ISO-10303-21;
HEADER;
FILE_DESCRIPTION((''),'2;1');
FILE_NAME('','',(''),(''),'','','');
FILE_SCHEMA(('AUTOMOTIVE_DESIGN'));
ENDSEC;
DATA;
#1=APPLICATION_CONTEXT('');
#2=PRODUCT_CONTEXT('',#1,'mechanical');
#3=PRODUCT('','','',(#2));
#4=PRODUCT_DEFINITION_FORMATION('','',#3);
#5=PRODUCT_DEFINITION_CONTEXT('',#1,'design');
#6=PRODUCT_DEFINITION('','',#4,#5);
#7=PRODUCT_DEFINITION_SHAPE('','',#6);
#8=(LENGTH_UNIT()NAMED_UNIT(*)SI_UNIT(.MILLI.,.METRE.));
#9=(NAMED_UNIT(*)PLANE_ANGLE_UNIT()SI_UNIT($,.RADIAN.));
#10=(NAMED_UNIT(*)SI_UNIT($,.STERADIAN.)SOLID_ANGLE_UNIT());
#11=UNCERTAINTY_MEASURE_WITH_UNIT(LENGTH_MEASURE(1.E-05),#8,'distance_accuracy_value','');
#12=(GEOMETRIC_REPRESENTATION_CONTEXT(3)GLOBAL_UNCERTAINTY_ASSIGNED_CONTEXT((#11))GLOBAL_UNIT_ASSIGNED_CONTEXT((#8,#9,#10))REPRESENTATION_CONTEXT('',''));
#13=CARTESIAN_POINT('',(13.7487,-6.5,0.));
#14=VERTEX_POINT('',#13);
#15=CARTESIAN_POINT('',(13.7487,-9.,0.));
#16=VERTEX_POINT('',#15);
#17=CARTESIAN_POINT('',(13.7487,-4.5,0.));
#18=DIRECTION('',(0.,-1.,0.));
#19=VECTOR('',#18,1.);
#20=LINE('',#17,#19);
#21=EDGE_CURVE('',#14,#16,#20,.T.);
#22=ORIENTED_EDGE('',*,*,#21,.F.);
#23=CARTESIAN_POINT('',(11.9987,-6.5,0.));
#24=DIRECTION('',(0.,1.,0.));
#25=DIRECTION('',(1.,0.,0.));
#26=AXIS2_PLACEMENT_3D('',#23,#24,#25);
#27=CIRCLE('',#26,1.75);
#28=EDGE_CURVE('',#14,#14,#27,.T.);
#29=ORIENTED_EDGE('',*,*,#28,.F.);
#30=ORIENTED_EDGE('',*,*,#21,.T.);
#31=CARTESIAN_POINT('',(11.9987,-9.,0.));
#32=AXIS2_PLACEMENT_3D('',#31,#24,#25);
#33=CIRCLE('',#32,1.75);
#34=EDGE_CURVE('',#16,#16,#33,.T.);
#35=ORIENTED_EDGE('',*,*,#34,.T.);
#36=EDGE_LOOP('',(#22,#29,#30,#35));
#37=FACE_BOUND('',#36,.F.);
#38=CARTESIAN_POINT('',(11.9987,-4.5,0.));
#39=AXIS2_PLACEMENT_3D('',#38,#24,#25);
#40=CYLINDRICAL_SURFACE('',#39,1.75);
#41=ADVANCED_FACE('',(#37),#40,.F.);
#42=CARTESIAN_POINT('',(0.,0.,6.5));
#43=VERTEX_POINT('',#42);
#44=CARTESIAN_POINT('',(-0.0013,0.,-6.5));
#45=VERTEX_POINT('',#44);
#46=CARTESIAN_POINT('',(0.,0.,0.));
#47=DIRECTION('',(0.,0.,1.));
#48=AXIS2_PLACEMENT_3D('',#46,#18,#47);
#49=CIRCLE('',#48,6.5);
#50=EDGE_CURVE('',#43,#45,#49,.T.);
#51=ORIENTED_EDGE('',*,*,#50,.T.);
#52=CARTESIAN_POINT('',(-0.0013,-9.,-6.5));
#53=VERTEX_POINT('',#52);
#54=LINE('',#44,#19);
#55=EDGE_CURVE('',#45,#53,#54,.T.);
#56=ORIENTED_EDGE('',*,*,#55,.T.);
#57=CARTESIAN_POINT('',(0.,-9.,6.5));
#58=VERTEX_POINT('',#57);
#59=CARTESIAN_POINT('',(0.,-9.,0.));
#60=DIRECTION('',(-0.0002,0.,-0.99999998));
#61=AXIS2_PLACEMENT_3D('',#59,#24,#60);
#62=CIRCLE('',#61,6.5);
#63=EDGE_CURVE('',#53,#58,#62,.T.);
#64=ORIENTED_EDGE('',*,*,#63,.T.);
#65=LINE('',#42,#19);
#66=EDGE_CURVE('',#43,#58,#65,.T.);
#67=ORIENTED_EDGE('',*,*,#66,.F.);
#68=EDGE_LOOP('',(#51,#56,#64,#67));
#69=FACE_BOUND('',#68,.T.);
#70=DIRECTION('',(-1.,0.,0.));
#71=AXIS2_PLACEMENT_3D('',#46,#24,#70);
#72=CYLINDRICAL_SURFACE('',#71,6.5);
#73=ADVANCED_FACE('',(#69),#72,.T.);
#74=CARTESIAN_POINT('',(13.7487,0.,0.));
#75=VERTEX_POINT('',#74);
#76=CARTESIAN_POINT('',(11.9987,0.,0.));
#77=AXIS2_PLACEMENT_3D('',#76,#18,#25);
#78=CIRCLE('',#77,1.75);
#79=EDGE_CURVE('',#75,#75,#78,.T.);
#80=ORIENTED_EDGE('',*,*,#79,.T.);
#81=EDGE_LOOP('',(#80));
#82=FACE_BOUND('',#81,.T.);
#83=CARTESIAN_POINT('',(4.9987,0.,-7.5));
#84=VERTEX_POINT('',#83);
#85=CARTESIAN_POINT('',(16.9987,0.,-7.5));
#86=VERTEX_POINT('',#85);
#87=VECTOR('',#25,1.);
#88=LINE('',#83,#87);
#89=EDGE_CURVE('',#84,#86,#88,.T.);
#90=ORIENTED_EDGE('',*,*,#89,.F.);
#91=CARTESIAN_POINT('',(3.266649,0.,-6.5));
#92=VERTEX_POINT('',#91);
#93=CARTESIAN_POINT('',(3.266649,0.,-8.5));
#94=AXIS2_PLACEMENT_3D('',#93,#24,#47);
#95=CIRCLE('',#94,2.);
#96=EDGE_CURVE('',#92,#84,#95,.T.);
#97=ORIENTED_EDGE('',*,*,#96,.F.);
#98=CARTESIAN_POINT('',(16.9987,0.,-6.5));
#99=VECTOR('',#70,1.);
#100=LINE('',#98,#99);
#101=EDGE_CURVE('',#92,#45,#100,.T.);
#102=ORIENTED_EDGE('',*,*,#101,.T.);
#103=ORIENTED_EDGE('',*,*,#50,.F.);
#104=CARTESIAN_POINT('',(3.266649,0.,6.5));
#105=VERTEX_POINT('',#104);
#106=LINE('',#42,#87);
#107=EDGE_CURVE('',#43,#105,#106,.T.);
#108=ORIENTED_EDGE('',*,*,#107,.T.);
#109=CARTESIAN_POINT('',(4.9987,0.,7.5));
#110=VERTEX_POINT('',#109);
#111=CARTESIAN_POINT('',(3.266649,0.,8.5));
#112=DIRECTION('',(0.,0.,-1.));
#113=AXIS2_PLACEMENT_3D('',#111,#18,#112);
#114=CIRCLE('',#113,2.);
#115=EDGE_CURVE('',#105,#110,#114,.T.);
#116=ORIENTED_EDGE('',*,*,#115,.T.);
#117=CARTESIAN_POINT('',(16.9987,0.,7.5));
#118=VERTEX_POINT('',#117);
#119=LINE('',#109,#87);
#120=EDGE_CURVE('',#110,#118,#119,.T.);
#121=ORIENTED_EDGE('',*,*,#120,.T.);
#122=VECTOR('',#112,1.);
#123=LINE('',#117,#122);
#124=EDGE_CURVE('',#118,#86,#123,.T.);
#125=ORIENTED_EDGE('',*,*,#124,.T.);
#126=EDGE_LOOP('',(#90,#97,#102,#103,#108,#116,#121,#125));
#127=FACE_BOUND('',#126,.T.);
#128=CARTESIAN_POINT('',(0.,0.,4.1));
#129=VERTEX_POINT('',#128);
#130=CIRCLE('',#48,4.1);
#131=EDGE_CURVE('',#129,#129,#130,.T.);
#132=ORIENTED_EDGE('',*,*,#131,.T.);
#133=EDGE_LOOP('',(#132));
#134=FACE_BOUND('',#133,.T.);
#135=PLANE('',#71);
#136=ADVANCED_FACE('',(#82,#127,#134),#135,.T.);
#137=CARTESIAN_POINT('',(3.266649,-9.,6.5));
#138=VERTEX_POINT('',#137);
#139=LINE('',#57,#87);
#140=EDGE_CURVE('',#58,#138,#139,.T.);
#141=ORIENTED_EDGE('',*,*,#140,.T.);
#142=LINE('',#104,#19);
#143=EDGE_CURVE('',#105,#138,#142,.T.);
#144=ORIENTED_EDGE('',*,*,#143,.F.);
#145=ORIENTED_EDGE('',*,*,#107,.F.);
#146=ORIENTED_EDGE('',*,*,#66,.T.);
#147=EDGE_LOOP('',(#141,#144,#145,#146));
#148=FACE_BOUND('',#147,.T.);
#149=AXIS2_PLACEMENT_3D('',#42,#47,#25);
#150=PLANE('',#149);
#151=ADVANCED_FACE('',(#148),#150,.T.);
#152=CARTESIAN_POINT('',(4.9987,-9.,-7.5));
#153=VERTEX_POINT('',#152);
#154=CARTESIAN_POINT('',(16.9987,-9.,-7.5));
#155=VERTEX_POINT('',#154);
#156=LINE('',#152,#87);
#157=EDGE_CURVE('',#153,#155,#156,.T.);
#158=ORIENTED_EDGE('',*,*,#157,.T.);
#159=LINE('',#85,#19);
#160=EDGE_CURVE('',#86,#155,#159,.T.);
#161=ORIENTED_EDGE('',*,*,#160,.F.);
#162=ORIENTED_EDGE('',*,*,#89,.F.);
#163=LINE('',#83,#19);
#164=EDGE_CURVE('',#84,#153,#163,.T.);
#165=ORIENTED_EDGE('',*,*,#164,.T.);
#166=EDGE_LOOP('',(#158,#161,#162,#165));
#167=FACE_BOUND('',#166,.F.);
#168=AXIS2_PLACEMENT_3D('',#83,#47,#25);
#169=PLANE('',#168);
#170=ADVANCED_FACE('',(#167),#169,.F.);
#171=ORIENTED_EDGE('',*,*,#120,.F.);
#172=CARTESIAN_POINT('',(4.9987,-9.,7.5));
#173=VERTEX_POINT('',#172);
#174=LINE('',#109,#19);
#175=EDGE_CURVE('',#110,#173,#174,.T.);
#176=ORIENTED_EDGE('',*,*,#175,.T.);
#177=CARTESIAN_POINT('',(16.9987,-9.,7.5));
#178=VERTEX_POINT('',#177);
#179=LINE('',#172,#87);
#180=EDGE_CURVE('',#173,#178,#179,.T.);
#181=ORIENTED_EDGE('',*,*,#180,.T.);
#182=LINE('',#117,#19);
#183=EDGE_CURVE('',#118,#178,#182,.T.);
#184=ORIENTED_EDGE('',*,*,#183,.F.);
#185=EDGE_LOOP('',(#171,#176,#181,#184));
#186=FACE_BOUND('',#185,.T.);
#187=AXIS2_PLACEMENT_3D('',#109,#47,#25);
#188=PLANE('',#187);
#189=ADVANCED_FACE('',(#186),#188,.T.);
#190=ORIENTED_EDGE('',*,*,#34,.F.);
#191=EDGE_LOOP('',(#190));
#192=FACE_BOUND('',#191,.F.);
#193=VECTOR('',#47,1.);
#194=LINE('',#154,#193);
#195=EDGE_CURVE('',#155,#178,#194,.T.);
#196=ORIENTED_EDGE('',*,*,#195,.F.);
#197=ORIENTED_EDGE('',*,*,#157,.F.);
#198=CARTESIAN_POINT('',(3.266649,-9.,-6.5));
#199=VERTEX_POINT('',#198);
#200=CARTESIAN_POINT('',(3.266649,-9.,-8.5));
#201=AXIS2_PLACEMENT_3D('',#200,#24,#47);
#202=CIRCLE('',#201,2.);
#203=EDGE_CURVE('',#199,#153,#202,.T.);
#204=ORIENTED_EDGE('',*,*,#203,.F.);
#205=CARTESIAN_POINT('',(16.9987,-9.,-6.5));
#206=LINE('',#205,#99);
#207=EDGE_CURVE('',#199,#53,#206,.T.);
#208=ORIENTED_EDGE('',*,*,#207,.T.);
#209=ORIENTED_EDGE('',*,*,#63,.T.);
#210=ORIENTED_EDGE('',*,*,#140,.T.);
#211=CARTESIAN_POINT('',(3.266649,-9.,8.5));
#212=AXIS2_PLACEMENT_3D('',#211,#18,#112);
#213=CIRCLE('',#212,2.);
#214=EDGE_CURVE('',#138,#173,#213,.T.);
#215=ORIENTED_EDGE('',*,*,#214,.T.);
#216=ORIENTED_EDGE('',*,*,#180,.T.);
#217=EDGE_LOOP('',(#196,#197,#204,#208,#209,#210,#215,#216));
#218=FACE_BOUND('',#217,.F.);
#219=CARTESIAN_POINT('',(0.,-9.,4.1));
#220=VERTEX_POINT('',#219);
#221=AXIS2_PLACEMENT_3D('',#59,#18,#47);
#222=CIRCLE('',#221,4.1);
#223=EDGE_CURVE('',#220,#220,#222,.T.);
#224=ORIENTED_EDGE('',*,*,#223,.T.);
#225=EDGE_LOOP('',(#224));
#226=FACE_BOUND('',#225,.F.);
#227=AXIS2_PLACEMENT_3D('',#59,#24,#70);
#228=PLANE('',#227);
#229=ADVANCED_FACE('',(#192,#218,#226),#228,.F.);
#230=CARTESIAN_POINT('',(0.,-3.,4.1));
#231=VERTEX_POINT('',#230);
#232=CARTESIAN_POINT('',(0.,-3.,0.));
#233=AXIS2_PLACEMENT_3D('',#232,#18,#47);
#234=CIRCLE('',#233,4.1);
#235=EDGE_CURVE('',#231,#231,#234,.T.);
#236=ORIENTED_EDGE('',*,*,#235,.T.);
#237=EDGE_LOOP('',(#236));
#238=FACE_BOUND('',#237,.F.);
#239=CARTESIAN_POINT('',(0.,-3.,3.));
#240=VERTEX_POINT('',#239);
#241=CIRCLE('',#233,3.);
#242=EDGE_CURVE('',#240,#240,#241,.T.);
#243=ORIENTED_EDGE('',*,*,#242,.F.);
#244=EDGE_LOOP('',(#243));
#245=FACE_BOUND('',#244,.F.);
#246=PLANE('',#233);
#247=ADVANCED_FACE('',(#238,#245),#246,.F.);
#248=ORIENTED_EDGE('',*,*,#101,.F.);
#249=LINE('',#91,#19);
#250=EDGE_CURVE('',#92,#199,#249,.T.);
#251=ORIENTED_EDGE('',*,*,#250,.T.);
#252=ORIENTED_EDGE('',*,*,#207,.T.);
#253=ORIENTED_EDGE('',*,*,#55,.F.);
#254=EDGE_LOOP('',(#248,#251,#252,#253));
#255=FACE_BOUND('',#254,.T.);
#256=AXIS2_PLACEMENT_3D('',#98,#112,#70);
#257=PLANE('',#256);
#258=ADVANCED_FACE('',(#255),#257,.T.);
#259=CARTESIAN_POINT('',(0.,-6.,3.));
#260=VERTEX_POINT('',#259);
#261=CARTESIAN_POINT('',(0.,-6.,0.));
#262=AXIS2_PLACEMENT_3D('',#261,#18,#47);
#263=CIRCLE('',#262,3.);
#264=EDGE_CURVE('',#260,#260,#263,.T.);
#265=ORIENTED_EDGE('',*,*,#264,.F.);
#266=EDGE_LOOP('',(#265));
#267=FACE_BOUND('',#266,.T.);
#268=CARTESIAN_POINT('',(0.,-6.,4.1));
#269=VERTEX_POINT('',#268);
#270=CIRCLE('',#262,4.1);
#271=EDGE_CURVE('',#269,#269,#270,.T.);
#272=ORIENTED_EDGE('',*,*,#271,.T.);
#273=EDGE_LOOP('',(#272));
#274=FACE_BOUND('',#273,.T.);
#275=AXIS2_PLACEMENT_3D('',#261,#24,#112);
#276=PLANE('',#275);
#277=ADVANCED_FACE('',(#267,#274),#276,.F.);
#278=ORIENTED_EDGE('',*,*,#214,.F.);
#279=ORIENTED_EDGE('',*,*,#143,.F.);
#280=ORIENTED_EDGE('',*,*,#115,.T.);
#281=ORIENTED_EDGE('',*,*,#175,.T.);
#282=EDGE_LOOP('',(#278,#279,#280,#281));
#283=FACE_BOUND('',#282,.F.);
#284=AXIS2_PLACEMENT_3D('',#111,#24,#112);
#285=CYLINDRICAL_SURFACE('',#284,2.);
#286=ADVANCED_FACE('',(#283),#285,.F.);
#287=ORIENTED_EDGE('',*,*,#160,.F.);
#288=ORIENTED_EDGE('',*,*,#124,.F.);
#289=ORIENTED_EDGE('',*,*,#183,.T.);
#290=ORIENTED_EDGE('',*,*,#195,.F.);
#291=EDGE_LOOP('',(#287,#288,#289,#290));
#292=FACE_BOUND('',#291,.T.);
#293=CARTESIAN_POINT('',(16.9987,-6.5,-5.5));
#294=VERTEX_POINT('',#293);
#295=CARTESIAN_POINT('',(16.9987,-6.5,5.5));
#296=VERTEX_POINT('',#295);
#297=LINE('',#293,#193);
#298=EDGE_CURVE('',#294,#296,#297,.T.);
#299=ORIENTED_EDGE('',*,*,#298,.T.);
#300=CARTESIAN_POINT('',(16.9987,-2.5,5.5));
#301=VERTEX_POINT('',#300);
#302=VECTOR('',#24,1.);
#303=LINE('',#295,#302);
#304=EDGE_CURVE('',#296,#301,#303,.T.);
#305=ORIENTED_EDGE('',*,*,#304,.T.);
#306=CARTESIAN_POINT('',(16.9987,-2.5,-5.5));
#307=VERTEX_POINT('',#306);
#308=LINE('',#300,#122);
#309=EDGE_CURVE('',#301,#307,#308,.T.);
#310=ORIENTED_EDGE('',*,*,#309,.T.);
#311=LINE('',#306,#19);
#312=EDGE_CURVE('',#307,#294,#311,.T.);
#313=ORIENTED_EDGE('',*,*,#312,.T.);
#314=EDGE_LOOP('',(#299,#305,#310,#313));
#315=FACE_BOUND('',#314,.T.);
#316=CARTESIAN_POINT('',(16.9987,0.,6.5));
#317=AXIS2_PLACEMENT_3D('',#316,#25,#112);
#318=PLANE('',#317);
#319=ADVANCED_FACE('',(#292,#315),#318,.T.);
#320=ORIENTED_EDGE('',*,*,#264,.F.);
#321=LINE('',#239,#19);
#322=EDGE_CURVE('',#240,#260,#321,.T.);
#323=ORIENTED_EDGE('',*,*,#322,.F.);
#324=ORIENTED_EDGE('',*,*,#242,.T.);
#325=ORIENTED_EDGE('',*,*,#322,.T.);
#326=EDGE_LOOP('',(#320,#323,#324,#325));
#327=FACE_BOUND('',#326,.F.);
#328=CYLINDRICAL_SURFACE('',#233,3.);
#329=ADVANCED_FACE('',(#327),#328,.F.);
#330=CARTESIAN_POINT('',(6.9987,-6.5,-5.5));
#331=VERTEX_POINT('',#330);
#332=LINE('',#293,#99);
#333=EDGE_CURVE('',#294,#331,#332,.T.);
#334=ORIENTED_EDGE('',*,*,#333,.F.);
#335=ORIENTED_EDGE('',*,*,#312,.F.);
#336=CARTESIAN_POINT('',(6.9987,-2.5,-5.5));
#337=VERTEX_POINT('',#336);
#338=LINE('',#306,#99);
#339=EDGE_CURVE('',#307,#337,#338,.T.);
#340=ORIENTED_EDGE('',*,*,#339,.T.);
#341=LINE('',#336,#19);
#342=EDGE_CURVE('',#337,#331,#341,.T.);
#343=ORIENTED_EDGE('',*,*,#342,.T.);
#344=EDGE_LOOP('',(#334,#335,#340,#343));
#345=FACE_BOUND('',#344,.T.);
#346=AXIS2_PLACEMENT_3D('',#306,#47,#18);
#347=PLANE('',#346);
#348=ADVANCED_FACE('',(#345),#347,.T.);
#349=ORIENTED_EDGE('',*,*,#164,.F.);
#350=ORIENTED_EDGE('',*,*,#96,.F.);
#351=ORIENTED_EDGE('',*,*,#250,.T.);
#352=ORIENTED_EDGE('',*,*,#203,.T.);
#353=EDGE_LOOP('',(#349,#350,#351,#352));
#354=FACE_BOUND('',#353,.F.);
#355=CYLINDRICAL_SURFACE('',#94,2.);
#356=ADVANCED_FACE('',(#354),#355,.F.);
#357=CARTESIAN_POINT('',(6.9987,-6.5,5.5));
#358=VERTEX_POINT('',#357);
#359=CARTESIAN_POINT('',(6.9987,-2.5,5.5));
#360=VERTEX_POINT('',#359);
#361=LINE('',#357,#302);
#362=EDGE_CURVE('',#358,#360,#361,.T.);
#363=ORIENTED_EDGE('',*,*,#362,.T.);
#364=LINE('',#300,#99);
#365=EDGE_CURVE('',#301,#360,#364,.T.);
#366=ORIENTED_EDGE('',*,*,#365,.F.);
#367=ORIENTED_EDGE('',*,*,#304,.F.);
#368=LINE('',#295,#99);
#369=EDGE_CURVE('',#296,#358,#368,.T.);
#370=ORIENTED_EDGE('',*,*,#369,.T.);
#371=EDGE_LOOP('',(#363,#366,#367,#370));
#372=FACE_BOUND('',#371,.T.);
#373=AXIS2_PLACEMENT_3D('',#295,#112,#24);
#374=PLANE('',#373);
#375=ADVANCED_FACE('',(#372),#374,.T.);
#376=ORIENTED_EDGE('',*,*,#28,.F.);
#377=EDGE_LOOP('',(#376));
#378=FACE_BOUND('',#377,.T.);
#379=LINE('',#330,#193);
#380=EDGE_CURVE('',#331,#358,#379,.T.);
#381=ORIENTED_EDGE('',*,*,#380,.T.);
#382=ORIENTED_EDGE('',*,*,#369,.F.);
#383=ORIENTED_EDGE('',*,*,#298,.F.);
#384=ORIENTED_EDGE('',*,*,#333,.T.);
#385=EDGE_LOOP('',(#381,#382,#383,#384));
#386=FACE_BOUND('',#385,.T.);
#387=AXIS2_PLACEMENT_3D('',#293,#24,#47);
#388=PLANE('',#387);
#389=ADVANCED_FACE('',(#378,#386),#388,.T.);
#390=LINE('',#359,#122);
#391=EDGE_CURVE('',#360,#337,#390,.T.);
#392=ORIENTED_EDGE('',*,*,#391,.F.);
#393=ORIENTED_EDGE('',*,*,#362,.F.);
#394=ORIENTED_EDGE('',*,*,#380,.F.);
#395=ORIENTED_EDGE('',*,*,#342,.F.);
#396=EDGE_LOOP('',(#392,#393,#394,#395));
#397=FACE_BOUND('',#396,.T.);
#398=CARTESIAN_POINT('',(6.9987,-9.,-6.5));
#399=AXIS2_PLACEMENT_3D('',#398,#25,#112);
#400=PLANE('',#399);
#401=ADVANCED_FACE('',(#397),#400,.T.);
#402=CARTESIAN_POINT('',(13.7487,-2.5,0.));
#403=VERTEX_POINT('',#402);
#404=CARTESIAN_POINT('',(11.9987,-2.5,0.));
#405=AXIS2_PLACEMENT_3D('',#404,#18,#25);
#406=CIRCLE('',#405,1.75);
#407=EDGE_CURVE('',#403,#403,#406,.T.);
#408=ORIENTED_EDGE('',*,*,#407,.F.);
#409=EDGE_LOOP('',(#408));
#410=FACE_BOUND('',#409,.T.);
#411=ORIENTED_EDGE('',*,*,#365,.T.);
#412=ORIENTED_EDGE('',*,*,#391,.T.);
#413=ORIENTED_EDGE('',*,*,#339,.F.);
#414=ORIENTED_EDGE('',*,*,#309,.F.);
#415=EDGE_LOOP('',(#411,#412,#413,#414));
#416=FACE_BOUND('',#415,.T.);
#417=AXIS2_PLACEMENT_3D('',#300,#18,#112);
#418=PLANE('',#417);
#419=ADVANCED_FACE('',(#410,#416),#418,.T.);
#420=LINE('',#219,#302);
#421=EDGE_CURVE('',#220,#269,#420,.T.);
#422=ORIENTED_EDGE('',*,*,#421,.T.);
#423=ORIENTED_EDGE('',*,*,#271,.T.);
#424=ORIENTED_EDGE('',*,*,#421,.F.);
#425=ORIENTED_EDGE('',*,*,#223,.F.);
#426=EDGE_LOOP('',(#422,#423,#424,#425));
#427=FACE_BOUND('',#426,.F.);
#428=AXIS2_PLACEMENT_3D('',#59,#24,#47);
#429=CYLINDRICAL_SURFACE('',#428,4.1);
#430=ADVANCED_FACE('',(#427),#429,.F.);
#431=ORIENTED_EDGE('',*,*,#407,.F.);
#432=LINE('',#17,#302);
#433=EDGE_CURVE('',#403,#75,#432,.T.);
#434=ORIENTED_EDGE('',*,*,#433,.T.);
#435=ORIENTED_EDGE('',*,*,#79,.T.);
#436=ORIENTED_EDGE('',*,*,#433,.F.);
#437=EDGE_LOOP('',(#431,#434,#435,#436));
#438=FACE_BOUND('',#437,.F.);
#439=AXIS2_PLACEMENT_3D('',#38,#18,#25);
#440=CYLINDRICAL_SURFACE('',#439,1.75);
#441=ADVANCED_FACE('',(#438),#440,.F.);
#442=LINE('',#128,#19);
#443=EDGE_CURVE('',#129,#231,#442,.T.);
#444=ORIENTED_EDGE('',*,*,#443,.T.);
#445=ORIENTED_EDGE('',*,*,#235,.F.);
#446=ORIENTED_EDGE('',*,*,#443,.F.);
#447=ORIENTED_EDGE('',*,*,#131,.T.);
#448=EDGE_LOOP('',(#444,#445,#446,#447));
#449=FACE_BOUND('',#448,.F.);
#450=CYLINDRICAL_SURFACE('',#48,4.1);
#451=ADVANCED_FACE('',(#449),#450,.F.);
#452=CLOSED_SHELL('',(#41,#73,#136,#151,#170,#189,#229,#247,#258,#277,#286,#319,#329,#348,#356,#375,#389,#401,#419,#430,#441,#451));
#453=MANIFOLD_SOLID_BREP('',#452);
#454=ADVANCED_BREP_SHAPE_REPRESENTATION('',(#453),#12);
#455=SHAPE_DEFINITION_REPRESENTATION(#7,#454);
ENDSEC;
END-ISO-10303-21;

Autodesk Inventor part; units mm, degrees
ref_plane "YZ Plane" through (0, 0, 0) normal (1, 0, 0) x (0, 1, 0)
ref_plane "XZ Plane" through (0, 0, 0) normal (0, 1, 0) x (-1, 0, 0)
ref_plane "XY Plane" through (0, 0, 0) normal (0, 0, 1) x (1, 0, 0)
sketch "Sketch1" plane through (0, 0, 0) normal (0, 1, 0) x (-1, 0, 0)
  circle A0 centre (0, 0) radius 2
  circle A1 centre (0, 0) radius 4 construction
  circle A2 centre (0, 0) radius 6.5
  dimension "d0" = 4
  dimension "d1" = 8
  dimension "d2" = 13
extrude "Extrusion1" add sketch "Sketch1" against normal blind 9
ref_plane "Work Plane1" through (0, -4.5, 0) normal (0, 1, 0) x (1, 0, 0)
hole "Hole1" at (0, 0, 0) direction (0, -1, 0) diameter 6 end through all counterbore diameter 8.2 counterbore depth 3
mirror "Mirror1" about plane through (0, -4.5, 0) normal (0, 1, 0) of "Hole1"
sketch "Sketch2" plane through (0, -4.5, 0) normal (0, 1, 0) x (1, 0, 0)
  circle A0 centre (0, 0) radius 4.1 projected
  circle A1 centre (0, 0) radius 6.5 projected
  line L0 (0, -6.5) -> (16.9987, -6.5)
  line L1 (16.9987, -6.5) -> (16.9987, 6.5)
  line L2 (16.9987, 6.5) -> (-0.0013, 6.5)
  arc A2 (-0.0013, 6.5) -> (0, -6.5) centre (0, 0) ccw
  dimension "d14" = 17
extrude "Extrusion2" add sketch "Sketch2" against normal up to surface (9 mm away) from surface at 4.5 contours A1 L2 L1 L0
sketch "Sketch3" plane through (16.9987, -9, -6.5) normal (1, 0, 0) x (0, 0, -1)
  line L0 (-13, 0) -> (-13, 9) construction
  line L1 (-13, 4.5) -> (0, 4.5) construction
  line L2 (0, 0) -> (0, 9) construction
  line L3 (-6.5, 9) -> (-6.5, -1) construction
  line L4 (-12, 6.5) -> (-1, 6.5)
  line L5 (-1, 6.5) -> (-1, 2.5)
  line L6 (-1, 2.5) -> (-12, 2.5)
  line L7 (-12, 2.5) -> (-12, 6.5)
  dimension "d17" = 11
  dimension "d18" = 4
extrude "Extrusion3" cut sketch "Sketch3" against normal blind 10
sketch "Sketch4" plane through (0, -4.5, 0) normal (0, 1, 0) x (1, 0, 0)
  line L0 (16.9987, 6.5) -> (16.9987, -6.5) projected
  line L1 (16.9987, -6.5) -> (4.9987, -6.5)
  line L2 (4.9987, -6.5) -> (4.9987, -7.5)
  line L3 (4.9987, -7.5) -> (16.9987, -7.5)
  line L4 (16.9987, -7.5) -> (16.9987, -6.5)
  line L5 (0, 0) -> (21.5191, 0) construction
  line L6 (16.9987, 6.5) -> (4.9987, 6.5)
  line L7 (4.9987, 6.5) -> (4.9987, 7.5)
  line L8 (4.9987, 7.5) -> (16.9987, 7.5)
  line L9 (16.9987, 7.5) -> (16.9987, 6.5)
  dimension "d21" = 1
  dimension "d22" = 12
extrude "Extrusion4" add sketch "Sketch4" against normal up to surface (9 mm away) from surface at 4.5
fillet "Fillet1" radius 2 2 edges at (4.9987, -4.5, -6.5) (4.9987, -4.5, 6.5)
sketch "Sketch5" plane through (0, -4.5, 0) normal (0, 1, 0) x (1, 0, 0)
  line L0 (16.9987, -5.5) -> (6.9987, -5.5) construction
  line L1 (6.9987, -5.5) -> (6.9987, 5.5) construction
  line L2 (16.9987, 5.5) -> (6.9987, 5.5) construction
  line L3 (6.9987, 0) -> (20.6867, 0) construction
  line L4 (11.9987, -5.5) -> (11.9987, 4.4002) construction
  circle A0 centre (11.9987, 0) radius 1.75
  point P0 (0, 0)
  dimension "d26" = 3.5
extrude "Extrusion5" cut sketch "Sketch5" along normal through all both and the other way through all
properties part number "center-machine-v2-rod-socket"
